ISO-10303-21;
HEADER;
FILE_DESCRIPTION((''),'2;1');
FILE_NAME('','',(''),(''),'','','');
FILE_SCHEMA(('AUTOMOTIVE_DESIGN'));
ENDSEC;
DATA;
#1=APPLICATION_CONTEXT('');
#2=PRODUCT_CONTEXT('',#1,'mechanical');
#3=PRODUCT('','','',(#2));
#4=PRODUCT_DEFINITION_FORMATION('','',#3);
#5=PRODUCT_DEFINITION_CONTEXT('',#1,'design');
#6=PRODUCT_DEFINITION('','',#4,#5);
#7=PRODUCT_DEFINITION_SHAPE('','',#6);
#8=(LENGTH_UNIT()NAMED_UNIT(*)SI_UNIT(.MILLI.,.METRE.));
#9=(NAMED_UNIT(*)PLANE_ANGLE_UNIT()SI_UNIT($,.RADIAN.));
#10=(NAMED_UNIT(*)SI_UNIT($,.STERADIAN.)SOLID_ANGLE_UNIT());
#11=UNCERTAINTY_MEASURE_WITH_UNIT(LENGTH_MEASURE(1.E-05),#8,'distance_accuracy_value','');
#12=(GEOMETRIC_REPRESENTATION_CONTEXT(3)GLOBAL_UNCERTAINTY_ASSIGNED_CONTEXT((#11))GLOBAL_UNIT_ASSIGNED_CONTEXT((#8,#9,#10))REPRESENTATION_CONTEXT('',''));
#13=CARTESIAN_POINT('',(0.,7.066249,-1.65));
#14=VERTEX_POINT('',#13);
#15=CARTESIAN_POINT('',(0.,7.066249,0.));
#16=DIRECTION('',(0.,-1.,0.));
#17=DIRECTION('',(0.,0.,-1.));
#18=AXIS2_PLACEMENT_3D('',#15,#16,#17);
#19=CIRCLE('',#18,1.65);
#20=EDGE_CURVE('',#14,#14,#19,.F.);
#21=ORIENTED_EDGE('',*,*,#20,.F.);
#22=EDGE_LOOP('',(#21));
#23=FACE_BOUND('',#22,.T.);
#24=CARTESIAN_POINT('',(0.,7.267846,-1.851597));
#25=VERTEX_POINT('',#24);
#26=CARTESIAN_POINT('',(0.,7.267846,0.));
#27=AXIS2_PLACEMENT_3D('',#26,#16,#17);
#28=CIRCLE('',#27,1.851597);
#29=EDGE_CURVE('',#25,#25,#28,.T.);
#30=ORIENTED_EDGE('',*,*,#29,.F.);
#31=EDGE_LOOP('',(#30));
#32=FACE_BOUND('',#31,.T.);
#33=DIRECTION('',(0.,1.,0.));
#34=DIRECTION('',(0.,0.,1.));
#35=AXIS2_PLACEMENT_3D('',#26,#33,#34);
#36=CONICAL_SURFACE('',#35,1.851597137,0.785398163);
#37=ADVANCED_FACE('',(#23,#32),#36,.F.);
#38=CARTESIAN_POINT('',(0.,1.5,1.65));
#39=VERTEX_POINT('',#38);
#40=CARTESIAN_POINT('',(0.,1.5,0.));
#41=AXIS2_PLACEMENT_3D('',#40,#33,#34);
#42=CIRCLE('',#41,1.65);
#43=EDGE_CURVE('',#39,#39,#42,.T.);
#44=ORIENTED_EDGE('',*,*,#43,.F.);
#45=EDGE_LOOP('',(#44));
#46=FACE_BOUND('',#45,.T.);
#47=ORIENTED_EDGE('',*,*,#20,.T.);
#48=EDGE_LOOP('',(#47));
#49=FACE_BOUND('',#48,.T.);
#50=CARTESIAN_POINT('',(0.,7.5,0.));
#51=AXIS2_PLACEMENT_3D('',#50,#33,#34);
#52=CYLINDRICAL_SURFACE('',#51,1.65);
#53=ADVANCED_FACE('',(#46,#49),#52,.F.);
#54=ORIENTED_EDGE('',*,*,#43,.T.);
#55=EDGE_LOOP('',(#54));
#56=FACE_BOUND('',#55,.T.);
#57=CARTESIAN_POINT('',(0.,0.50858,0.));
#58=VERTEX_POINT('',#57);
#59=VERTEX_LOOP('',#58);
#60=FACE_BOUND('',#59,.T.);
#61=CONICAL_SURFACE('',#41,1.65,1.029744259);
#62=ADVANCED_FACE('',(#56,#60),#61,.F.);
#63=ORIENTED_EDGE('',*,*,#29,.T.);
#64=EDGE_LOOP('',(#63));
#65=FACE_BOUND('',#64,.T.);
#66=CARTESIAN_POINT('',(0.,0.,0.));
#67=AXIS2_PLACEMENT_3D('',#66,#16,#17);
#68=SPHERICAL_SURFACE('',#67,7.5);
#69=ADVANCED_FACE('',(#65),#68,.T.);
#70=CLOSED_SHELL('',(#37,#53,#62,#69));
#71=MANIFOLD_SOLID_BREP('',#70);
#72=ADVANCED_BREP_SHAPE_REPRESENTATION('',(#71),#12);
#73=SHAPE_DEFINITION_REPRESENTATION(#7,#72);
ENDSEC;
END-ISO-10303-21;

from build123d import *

# Parameters (mm, degrees)
TAP_DRILL_FOR_M4X0_7_TAP2_D     = 3.3
TAP_DRILL_FOR_M4X0_7_TAP2_DEPTH = 6
TAP_DRILL_FOR_M4X0_7_TAP2_TIP   = 0.991420021


with BuildPart() as part:
    # Sketch2 → Revolve1 (revolve)
    with BuildSketch(Plane.XY):
        with BuildLine():
            Line((-7.5, 0), (7.5, 0))
            ThreePointArc((7.5, 0), (0, 7.5), (-7.5, 0))
        make_face()
    revolve(axis=Axis((-7.5, 0, 0), (1, 0, 0)))

    # Tap Drill for M4x0.7 Tap2
    with Locations(Plane(origin=(0, 7.5, 0), x_dir=(1, 0, 0), z_dir=(0, 1, 0))):
        with Locations((0, 0)):
            Hole(TAP_DRILL_FOR_M4X0_7_TAP2_D / 2, depth=TAP_DRILL_FOR_M4X0_7_TAP2_DEPTH)
            with Locations((0, 0, -(TAP_DRILL_FOR_M4X0_7_TAP2_DEPTH + TAP_DRILL_FOR_M4X0_7_TAP2_TIP / 2))):  # 118° drill point
                Cone(0, TAP_DRILL_FOR_M4X0_7_TAP2_D / 2, TAP_DRILL_FOR_M4X0_7_TAP2_TIP, mode=Mode.SUBTRACT)

    # Chamfer1
    # the kernel refuses this chamfer: 0.25, 0.209117546 mm, written as the material it takes off along each edge
    with BuildSketch(Plane(origin=(-1e-09, 7.316249039, -3e-09), x_dir=(-1.0, 0, 1.5237922439259502e-09), z_dir=(1.5237922439259502e-09, 0, 1.0))) as chamfer1_piece_1:
        with BuildLine():
            Line((1.851597136, 0.048402863), (1.649999997, 0.250000002))
            Line((1.649999997, 0.250000002), (1.649999999, 0))
            ThreePointArc((1.649999999, 0), (1.75350475, 0.024114846), (1.851597136, 0.048402863))
        make_face()
    revolve(axis=Axis((-1e-09, 7.316249039, -3e-09), (0, -1, 0)), revolution_arc=180.000000175, mode=Mode.SUBTRACT)
    with BuildSketch(Plane(origin=(0, 7.316249039, 3e-09), x_dir=(1.0, 0, -1.755349969310666e-09), z_dir=(-1.755349969310666e-09, 0, -1.0))) as chamfer1_piece_2:
        with BuildLine():
            Line((1.851597137, 0.048402863), (1.649999997, 0.250000003))
            Line((1.649999997, 0.250000003), (1.65, 0))
            ThreePointArc((1.65, 0), (1.75350475, 0.024114847), (1.851597137, 0.048402863))
        make_face()
    revolve(axis=Axis((0, 7.316249039, 3e-09), (0, -1, 0)), revolution_arc=180.000000201, mode=Mode.SUBTRACT)


solid = part.part
